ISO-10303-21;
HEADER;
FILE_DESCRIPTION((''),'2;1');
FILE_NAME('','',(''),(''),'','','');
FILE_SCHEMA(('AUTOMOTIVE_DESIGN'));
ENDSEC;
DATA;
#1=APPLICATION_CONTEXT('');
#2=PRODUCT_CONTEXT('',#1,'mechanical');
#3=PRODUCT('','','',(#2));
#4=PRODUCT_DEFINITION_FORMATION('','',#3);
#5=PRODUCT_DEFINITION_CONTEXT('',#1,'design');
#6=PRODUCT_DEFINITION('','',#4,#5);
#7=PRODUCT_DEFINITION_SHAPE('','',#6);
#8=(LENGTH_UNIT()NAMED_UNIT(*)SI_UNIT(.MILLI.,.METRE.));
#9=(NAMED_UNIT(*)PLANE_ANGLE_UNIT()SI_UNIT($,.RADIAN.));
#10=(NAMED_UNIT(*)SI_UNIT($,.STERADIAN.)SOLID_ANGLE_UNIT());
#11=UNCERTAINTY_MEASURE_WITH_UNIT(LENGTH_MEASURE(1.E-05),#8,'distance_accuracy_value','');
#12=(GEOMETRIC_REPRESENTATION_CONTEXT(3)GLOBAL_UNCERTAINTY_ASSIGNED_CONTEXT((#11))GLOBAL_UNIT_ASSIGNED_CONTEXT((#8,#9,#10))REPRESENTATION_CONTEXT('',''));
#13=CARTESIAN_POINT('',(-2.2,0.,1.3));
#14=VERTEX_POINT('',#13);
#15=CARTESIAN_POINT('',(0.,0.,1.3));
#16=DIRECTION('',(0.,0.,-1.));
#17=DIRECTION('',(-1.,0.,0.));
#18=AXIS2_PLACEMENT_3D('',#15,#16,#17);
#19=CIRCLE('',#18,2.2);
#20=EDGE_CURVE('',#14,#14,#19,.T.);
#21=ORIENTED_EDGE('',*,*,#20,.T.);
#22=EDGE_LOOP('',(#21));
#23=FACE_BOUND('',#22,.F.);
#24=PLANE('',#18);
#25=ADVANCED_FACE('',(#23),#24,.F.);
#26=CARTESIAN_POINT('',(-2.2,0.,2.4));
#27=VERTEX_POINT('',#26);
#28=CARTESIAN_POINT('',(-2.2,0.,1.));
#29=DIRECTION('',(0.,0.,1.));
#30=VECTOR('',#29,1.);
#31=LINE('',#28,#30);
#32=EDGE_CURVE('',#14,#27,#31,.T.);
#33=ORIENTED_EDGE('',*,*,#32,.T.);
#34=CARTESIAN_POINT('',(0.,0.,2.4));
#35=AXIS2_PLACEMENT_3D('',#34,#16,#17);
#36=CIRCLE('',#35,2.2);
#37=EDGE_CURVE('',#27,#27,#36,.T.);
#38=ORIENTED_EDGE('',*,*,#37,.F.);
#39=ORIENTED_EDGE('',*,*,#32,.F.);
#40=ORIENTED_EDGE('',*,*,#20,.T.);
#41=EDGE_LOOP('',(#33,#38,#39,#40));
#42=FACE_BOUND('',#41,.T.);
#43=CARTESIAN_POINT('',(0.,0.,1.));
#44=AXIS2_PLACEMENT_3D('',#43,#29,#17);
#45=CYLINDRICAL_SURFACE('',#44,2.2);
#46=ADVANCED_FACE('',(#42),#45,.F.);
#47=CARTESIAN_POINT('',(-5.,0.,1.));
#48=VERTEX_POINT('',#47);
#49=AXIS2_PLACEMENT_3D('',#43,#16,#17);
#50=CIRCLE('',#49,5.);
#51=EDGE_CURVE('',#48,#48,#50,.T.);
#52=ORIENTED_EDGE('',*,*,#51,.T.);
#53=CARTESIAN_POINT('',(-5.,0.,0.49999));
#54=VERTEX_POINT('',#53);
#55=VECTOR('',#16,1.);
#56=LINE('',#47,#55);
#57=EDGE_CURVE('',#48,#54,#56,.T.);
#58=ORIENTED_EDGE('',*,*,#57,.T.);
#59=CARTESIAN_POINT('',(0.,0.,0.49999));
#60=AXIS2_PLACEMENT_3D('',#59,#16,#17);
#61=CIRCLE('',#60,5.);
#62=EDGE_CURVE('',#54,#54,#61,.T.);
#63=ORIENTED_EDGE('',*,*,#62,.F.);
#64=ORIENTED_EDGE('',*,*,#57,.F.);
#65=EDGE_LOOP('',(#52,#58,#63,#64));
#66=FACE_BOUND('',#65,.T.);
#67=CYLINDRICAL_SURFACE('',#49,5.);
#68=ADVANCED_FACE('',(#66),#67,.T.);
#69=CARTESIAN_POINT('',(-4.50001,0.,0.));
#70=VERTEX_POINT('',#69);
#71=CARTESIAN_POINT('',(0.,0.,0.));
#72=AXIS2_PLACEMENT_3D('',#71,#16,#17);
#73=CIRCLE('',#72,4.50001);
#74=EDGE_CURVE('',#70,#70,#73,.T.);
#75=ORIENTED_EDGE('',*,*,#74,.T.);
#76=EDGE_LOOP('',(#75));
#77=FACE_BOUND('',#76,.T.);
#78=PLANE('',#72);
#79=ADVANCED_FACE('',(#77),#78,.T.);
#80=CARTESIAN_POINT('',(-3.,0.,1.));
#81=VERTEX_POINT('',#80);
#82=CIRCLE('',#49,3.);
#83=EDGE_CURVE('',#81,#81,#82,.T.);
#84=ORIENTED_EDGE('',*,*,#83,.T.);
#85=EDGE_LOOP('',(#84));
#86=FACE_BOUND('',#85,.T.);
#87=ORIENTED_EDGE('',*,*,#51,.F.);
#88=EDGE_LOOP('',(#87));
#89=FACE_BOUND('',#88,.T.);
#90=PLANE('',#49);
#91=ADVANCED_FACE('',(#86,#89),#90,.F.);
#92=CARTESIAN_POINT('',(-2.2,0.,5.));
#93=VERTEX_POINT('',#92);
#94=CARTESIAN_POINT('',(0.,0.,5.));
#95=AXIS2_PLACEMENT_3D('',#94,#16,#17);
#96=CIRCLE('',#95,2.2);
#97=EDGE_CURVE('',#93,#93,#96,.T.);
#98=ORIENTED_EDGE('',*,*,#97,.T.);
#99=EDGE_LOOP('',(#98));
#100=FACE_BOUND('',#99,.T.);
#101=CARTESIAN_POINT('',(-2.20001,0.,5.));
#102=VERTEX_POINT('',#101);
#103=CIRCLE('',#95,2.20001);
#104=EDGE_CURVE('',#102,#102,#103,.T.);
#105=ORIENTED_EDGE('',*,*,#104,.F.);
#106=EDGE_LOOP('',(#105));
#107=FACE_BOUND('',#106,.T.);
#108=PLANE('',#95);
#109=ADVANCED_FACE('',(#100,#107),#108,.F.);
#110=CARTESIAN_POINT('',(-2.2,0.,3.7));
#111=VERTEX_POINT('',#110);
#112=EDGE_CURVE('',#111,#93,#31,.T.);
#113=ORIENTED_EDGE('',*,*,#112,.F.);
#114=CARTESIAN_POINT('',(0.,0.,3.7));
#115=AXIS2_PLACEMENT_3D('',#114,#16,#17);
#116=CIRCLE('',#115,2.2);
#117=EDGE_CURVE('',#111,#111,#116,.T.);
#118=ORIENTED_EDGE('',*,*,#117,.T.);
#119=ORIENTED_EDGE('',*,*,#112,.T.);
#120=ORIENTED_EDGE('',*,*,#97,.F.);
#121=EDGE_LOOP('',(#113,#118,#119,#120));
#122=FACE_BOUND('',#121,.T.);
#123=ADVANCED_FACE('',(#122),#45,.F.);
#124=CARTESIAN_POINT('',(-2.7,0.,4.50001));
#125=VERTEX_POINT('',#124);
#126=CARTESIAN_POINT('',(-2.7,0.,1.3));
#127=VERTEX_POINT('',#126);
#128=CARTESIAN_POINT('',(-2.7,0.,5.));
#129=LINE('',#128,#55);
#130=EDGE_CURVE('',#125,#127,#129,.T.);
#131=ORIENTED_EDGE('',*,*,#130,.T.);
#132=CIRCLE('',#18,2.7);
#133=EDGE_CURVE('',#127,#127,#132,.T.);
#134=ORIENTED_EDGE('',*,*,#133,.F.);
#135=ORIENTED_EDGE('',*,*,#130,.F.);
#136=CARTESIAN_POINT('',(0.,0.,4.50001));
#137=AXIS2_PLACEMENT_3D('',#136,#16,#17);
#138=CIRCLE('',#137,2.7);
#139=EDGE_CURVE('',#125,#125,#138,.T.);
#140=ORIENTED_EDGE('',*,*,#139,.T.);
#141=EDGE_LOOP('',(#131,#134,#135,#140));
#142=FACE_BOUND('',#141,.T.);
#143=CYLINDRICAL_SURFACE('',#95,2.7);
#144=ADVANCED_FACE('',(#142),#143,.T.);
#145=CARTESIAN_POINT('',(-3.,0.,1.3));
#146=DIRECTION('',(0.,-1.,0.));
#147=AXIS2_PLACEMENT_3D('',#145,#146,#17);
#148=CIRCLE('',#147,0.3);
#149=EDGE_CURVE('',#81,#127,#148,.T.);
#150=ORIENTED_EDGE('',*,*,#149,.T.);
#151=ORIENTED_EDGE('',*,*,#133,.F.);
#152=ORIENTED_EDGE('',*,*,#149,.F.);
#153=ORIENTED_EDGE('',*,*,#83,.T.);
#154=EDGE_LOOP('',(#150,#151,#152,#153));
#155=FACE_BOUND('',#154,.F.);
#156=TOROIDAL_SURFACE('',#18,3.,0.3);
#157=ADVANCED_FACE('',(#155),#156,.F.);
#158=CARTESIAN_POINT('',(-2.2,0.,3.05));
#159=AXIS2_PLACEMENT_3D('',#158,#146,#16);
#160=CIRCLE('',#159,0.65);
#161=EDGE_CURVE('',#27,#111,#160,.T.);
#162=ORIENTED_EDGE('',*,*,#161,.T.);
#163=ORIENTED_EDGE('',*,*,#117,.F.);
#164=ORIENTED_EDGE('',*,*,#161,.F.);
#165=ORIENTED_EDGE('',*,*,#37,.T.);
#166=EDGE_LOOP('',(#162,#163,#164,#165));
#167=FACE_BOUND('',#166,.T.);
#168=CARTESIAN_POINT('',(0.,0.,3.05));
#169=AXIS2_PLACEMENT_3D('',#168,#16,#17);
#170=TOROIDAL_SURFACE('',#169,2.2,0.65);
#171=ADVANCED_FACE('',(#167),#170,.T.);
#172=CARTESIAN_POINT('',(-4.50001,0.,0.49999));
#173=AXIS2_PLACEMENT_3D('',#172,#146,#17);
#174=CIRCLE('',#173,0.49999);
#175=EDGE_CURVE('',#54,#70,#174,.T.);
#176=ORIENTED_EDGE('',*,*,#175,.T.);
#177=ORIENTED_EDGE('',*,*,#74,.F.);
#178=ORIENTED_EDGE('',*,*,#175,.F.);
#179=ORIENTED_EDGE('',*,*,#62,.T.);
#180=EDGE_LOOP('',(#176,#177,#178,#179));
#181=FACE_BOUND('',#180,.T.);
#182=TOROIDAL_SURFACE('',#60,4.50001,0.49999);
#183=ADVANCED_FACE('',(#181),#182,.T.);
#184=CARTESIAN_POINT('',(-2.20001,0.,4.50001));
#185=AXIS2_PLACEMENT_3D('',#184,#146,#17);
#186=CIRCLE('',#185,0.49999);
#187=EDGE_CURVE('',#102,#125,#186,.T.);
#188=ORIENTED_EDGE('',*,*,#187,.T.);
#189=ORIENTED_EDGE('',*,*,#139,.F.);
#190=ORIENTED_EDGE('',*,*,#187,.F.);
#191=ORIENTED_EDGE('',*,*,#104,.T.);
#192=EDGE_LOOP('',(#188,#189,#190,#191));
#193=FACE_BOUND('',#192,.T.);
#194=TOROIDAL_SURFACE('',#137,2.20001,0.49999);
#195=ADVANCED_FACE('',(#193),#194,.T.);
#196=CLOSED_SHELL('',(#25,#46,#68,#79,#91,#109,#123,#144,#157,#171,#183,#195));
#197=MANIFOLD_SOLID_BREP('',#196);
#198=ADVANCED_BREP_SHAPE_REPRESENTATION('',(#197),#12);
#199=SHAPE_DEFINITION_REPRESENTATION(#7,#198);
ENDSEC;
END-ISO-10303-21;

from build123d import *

# Parameters (mm, degrees)
F0_W = 2.2
F0_H = 0.3
F2_R = 0.49999
F3_R = 0.3


# Not quite as in the source:
# - a fillet or chamfer is up to 0.001 mm smaller than in the source, because OpenCascade refuses the exact size


with BuildPart() as f1:
    # F0 (on Front) → F1 (revolve)
    with BuildSketch(Plane.XZ):
        Polygon((-2.7, 1), (-5, 1), (-5, 0), (0, 0), (0, 1), (-2.2, 1), align=None)
        Polygon((-2.7, 5), (-2.7, 1), (-2.2, 1), (-2.2, 1.3), (-2.2, 2.4), (-2.2, 3.7), (-2.2, 5), align=None)
        with BuildLine():
            Line((-2.2, 3.7), (-2.2, 2.4))
            ThreePointArc((-2.2, 2.4), (-1.55, 3.05), (-2.2, 3.7))
        make_face()
        with Locations((-1.1, 1.15)):
            Rectangle(F0_W, F0_H)
    revolve(axis=Axis((0, 0, 0.5), (0, 0, -1)))

    # F2 (radius 0.5 in the source; OpenCascade refuses exactly that, so slightly less here)
    f2_edges = [f1.edges().sort_by_distance(p)[0] for p in [
        (2.7, 0, 5),
        (5, 0, 0),
    ]]
    fillet(f2_edges, radius=F2_R)

    # F3
    f3_edges = [f1.edges().sort_by_distance(p)[0] for p in [
        (2.7, 0, 1),
    ]]
    fillet(f3_edges, radius=F3_R)


solid = f1.part
